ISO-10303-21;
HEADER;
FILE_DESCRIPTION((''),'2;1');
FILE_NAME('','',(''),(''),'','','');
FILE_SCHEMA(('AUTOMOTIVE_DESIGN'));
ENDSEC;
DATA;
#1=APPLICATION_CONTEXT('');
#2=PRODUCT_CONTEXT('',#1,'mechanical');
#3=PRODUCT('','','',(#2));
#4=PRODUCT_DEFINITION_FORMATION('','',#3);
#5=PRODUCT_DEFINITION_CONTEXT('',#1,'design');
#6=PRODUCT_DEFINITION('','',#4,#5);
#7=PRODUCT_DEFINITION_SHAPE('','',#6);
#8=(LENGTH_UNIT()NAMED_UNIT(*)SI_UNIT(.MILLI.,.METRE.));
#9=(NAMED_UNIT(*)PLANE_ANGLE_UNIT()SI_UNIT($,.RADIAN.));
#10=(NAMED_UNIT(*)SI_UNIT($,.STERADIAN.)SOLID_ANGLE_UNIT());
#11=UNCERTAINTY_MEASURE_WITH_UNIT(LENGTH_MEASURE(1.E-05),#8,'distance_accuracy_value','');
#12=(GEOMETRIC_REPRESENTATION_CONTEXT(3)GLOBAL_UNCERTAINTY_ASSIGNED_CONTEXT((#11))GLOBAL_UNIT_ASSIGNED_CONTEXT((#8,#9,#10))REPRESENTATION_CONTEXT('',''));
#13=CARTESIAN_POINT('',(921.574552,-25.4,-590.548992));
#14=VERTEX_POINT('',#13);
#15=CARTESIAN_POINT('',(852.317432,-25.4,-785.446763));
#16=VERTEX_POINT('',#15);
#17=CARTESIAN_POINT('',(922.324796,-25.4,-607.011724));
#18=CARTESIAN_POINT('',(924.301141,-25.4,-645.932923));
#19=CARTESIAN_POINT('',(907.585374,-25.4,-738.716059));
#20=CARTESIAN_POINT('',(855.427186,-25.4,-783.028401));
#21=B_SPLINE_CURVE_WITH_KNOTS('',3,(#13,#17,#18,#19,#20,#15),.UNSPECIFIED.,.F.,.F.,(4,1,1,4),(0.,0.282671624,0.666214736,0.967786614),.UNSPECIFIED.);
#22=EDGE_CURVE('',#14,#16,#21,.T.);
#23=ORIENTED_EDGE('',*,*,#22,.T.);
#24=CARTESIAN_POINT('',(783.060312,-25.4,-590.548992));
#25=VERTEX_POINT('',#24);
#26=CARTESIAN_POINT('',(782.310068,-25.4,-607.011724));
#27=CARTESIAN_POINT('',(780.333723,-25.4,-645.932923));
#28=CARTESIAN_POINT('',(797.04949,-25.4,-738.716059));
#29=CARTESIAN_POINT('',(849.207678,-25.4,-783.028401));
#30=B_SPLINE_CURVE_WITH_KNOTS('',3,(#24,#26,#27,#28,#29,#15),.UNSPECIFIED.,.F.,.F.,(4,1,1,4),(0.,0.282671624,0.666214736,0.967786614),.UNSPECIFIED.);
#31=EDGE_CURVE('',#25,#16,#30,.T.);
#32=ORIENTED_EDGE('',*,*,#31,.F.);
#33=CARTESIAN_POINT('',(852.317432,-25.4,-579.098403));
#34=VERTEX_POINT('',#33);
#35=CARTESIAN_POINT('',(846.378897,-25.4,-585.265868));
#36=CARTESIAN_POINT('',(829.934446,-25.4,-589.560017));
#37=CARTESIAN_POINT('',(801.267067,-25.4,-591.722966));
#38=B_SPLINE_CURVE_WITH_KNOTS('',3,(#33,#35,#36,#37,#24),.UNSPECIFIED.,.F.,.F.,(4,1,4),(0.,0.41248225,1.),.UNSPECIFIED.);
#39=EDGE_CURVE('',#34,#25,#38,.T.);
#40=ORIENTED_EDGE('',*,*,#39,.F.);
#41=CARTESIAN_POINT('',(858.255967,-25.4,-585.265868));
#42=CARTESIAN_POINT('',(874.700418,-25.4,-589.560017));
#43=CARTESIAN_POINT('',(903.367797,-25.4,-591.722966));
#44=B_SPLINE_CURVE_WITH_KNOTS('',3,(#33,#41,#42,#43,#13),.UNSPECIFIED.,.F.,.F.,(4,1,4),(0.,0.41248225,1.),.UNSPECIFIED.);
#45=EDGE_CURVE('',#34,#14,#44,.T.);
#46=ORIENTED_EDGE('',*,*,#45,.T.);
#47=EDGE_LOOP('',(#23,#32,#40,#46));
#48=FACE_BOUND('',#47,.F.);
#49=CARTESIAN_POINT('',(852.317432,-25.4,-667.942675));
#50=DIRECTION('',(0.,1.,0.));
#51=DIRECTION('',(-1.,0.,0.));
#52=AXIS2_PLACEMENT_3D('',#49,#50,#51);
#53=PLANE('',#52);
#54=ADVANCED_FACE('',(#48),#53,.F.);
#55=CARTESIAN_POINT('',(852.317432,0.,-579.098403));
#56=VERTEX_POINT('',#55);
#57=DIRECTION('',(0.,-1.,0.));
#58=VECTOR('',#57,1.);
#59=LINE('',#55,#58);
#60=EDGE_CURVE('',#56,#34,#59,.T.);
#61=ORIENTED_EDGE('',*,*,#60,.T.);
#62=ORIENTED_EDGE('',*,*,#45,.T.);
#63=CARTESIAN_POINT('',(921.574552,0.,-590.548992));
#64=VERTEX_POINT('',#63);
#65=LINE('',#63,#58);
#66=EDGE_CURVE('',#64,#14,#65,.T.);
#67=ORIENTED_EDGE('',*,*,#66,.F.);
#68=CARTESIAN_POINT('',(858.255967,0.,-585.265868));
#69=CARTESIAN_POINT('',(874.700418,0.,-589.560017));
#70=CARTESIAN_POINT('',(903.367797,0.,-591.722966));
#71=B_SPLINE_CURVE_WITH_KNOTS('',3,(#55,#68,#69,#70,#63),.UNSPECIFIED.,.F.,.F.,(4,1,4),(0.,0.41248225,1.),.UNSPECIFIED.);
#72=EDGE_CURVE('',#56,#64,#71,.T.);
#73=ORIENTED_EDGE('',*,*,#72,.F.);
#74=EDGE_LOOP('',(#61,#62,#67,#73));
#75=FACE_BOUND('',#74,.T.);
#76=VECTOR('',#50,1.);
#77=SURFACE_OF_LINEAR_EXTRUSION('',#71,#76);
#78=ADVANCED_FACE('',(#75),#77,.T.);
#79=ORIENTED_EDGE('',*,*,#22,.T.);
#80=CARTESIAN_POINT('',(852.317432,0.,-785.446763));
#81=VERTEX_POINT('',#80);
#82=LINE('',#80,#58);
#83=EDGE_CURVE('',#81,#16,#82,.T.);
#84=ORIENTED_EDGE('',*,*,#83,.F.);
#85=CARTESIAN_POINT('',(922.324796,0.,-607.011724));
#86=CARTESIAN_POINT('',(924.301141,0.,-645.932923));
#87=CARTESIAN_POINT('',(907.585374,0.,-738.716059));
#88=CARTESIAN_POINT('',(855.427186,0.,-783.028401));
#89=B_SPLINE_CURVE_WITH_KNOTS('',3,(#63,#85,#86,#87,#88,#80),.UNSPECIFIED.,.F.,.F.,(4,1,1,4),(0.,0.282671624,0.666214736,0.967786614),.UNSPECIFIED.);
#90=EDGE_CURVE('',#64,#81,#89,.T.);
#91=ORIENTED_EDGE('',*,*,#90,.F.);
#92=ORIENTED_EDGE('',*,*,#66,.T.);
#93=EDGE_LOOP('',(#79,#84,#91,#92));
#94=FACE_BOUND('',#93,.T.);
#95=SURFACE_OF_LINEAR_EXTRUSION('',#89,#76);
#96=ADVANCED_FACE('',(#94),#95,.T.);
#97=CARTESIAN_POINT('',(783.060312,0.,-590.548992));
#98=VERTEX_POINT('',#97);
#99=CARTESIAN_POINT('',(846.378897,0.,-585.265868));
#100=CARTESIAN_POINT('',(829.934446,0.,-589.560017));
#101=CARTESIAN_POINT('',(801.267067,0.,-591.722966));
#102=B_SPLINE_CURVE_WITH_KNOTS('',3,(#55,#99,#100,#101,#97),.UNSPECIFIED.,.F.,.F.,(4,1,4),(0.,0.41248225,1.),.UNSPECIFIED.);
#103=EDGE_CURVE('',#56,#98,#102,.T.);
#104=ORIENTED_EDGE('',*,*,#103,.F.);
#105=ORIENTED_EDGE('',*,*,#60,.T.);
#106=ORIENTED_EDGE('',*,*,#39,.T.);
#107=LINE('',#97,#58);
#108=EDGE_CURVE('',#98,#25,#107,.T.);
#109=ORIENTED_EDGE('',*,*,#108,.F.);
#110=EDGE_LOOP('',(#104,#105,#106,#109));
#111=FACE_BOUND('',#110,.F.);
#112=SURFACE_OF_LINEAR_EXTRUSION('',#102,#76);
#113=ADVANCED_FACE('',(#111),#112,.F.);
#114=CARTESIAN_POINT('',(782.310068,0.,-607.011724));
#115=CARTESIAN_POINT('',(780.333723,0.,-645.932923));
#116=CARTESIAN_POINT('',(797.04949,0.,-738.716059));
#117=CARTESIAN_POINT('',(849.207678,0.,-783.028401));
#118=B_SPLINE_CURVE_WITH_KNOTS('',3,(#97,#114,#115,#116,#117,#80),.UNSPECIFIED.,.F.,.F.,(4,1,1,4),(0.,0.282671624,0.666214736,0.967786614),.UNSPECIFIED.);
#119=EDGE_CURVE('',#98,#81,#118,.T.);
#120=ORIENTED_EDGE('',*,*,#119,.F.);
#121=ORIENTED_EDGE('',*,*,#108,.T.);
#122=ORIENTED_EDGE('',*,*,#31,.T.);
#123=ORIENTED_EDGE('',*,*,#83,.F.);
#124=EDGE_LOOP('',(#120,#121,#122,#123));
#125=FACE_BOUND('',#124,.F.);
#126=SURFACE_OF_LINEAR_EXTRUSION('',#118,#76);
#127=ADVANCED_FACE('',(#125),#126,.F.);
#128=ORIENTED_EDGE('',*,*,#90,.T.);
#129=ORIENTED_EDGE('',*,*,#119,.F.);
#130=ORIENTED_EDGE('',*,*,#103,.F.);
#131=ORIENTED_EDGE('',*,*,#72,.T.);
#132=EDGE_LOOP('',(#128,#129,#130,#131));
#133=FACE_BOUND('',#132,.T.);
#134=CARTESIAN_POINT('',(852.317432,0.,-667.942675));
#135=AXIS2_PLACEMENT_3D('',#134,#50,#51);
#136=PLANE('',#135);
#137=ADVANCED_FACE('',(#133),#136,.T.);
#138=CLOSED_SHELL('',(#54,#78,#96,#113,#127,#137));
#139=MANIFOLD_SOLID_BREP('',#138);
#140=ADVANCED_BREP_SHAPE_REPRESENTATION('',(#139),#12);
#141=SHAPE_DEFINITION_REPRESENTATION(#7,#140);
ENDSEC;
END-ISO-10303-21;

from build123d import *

# Parameters (mm, degrees)
F3_DEPTH = 25.4


with BuildPart() as f3:
    # F2 (on Front) → F3 (new body)
    with BuildSketch(Plane.XZ):
        with BuildLine():
            add(Edge.make_bspline(
                [(852.3174320221, -579.0984034538), (858.2559670769, -585.2658680133), (874.7004180149, -589.5600168599), (903.3677973809, -591.7229662034), (921.5745517731, -590.548992157)],
                knots=[0, 0, 0, 0, 0.4124822499, 1, 1, 1, 1], degree=3))
            add(Edge.make_bspline(
                [(852.3174320221, -579.0984034538), (846.3788969673, -585.2658680133), (829.9344460293, -589.5600168599), (801.2670666633, -591.7229662034), (783.0603122711, -590.548992157)],
                knots=[0, 0, 0, 0, 0.4124822499, 1, 1, 1, 1], degree=3))
            add(Edge.make_bspline(
                [(783.0603122711, -590.548992157), (782.310067677, -607.0117239943), (780.3337231664, -645.9329231025), (797.0494904139, -738.7160589782), (849.2076784238, -783.028401487), (852.3174320221, -785.4467630386)],
                knots=[0, 0, 0, 0, 0.2826716235, 0.666214736, 0.9677866144, 0.9677866144, 0.9677866144, 0.9677866144], degree=3))
            add(Edge.make_bspline(
                [(921.5745517731, -590.548992157), (922.3247963672, -607.0117239943), (924.3011408777, -645.9329231025), (907.5853736303, -738.7160589782), (855.4271856204, -783.028401487), (852.3174320221, -785.4467630386)],
                knots=[0, 0, 0, 0, 0.2826716235, 0.666214736, 0.9677866144, 0.9677866144, 0.9677866144, 0.9677866144], degree=3))
        make_face()
    extrude(amount=F3_DEPTH)


solid = f3.part
